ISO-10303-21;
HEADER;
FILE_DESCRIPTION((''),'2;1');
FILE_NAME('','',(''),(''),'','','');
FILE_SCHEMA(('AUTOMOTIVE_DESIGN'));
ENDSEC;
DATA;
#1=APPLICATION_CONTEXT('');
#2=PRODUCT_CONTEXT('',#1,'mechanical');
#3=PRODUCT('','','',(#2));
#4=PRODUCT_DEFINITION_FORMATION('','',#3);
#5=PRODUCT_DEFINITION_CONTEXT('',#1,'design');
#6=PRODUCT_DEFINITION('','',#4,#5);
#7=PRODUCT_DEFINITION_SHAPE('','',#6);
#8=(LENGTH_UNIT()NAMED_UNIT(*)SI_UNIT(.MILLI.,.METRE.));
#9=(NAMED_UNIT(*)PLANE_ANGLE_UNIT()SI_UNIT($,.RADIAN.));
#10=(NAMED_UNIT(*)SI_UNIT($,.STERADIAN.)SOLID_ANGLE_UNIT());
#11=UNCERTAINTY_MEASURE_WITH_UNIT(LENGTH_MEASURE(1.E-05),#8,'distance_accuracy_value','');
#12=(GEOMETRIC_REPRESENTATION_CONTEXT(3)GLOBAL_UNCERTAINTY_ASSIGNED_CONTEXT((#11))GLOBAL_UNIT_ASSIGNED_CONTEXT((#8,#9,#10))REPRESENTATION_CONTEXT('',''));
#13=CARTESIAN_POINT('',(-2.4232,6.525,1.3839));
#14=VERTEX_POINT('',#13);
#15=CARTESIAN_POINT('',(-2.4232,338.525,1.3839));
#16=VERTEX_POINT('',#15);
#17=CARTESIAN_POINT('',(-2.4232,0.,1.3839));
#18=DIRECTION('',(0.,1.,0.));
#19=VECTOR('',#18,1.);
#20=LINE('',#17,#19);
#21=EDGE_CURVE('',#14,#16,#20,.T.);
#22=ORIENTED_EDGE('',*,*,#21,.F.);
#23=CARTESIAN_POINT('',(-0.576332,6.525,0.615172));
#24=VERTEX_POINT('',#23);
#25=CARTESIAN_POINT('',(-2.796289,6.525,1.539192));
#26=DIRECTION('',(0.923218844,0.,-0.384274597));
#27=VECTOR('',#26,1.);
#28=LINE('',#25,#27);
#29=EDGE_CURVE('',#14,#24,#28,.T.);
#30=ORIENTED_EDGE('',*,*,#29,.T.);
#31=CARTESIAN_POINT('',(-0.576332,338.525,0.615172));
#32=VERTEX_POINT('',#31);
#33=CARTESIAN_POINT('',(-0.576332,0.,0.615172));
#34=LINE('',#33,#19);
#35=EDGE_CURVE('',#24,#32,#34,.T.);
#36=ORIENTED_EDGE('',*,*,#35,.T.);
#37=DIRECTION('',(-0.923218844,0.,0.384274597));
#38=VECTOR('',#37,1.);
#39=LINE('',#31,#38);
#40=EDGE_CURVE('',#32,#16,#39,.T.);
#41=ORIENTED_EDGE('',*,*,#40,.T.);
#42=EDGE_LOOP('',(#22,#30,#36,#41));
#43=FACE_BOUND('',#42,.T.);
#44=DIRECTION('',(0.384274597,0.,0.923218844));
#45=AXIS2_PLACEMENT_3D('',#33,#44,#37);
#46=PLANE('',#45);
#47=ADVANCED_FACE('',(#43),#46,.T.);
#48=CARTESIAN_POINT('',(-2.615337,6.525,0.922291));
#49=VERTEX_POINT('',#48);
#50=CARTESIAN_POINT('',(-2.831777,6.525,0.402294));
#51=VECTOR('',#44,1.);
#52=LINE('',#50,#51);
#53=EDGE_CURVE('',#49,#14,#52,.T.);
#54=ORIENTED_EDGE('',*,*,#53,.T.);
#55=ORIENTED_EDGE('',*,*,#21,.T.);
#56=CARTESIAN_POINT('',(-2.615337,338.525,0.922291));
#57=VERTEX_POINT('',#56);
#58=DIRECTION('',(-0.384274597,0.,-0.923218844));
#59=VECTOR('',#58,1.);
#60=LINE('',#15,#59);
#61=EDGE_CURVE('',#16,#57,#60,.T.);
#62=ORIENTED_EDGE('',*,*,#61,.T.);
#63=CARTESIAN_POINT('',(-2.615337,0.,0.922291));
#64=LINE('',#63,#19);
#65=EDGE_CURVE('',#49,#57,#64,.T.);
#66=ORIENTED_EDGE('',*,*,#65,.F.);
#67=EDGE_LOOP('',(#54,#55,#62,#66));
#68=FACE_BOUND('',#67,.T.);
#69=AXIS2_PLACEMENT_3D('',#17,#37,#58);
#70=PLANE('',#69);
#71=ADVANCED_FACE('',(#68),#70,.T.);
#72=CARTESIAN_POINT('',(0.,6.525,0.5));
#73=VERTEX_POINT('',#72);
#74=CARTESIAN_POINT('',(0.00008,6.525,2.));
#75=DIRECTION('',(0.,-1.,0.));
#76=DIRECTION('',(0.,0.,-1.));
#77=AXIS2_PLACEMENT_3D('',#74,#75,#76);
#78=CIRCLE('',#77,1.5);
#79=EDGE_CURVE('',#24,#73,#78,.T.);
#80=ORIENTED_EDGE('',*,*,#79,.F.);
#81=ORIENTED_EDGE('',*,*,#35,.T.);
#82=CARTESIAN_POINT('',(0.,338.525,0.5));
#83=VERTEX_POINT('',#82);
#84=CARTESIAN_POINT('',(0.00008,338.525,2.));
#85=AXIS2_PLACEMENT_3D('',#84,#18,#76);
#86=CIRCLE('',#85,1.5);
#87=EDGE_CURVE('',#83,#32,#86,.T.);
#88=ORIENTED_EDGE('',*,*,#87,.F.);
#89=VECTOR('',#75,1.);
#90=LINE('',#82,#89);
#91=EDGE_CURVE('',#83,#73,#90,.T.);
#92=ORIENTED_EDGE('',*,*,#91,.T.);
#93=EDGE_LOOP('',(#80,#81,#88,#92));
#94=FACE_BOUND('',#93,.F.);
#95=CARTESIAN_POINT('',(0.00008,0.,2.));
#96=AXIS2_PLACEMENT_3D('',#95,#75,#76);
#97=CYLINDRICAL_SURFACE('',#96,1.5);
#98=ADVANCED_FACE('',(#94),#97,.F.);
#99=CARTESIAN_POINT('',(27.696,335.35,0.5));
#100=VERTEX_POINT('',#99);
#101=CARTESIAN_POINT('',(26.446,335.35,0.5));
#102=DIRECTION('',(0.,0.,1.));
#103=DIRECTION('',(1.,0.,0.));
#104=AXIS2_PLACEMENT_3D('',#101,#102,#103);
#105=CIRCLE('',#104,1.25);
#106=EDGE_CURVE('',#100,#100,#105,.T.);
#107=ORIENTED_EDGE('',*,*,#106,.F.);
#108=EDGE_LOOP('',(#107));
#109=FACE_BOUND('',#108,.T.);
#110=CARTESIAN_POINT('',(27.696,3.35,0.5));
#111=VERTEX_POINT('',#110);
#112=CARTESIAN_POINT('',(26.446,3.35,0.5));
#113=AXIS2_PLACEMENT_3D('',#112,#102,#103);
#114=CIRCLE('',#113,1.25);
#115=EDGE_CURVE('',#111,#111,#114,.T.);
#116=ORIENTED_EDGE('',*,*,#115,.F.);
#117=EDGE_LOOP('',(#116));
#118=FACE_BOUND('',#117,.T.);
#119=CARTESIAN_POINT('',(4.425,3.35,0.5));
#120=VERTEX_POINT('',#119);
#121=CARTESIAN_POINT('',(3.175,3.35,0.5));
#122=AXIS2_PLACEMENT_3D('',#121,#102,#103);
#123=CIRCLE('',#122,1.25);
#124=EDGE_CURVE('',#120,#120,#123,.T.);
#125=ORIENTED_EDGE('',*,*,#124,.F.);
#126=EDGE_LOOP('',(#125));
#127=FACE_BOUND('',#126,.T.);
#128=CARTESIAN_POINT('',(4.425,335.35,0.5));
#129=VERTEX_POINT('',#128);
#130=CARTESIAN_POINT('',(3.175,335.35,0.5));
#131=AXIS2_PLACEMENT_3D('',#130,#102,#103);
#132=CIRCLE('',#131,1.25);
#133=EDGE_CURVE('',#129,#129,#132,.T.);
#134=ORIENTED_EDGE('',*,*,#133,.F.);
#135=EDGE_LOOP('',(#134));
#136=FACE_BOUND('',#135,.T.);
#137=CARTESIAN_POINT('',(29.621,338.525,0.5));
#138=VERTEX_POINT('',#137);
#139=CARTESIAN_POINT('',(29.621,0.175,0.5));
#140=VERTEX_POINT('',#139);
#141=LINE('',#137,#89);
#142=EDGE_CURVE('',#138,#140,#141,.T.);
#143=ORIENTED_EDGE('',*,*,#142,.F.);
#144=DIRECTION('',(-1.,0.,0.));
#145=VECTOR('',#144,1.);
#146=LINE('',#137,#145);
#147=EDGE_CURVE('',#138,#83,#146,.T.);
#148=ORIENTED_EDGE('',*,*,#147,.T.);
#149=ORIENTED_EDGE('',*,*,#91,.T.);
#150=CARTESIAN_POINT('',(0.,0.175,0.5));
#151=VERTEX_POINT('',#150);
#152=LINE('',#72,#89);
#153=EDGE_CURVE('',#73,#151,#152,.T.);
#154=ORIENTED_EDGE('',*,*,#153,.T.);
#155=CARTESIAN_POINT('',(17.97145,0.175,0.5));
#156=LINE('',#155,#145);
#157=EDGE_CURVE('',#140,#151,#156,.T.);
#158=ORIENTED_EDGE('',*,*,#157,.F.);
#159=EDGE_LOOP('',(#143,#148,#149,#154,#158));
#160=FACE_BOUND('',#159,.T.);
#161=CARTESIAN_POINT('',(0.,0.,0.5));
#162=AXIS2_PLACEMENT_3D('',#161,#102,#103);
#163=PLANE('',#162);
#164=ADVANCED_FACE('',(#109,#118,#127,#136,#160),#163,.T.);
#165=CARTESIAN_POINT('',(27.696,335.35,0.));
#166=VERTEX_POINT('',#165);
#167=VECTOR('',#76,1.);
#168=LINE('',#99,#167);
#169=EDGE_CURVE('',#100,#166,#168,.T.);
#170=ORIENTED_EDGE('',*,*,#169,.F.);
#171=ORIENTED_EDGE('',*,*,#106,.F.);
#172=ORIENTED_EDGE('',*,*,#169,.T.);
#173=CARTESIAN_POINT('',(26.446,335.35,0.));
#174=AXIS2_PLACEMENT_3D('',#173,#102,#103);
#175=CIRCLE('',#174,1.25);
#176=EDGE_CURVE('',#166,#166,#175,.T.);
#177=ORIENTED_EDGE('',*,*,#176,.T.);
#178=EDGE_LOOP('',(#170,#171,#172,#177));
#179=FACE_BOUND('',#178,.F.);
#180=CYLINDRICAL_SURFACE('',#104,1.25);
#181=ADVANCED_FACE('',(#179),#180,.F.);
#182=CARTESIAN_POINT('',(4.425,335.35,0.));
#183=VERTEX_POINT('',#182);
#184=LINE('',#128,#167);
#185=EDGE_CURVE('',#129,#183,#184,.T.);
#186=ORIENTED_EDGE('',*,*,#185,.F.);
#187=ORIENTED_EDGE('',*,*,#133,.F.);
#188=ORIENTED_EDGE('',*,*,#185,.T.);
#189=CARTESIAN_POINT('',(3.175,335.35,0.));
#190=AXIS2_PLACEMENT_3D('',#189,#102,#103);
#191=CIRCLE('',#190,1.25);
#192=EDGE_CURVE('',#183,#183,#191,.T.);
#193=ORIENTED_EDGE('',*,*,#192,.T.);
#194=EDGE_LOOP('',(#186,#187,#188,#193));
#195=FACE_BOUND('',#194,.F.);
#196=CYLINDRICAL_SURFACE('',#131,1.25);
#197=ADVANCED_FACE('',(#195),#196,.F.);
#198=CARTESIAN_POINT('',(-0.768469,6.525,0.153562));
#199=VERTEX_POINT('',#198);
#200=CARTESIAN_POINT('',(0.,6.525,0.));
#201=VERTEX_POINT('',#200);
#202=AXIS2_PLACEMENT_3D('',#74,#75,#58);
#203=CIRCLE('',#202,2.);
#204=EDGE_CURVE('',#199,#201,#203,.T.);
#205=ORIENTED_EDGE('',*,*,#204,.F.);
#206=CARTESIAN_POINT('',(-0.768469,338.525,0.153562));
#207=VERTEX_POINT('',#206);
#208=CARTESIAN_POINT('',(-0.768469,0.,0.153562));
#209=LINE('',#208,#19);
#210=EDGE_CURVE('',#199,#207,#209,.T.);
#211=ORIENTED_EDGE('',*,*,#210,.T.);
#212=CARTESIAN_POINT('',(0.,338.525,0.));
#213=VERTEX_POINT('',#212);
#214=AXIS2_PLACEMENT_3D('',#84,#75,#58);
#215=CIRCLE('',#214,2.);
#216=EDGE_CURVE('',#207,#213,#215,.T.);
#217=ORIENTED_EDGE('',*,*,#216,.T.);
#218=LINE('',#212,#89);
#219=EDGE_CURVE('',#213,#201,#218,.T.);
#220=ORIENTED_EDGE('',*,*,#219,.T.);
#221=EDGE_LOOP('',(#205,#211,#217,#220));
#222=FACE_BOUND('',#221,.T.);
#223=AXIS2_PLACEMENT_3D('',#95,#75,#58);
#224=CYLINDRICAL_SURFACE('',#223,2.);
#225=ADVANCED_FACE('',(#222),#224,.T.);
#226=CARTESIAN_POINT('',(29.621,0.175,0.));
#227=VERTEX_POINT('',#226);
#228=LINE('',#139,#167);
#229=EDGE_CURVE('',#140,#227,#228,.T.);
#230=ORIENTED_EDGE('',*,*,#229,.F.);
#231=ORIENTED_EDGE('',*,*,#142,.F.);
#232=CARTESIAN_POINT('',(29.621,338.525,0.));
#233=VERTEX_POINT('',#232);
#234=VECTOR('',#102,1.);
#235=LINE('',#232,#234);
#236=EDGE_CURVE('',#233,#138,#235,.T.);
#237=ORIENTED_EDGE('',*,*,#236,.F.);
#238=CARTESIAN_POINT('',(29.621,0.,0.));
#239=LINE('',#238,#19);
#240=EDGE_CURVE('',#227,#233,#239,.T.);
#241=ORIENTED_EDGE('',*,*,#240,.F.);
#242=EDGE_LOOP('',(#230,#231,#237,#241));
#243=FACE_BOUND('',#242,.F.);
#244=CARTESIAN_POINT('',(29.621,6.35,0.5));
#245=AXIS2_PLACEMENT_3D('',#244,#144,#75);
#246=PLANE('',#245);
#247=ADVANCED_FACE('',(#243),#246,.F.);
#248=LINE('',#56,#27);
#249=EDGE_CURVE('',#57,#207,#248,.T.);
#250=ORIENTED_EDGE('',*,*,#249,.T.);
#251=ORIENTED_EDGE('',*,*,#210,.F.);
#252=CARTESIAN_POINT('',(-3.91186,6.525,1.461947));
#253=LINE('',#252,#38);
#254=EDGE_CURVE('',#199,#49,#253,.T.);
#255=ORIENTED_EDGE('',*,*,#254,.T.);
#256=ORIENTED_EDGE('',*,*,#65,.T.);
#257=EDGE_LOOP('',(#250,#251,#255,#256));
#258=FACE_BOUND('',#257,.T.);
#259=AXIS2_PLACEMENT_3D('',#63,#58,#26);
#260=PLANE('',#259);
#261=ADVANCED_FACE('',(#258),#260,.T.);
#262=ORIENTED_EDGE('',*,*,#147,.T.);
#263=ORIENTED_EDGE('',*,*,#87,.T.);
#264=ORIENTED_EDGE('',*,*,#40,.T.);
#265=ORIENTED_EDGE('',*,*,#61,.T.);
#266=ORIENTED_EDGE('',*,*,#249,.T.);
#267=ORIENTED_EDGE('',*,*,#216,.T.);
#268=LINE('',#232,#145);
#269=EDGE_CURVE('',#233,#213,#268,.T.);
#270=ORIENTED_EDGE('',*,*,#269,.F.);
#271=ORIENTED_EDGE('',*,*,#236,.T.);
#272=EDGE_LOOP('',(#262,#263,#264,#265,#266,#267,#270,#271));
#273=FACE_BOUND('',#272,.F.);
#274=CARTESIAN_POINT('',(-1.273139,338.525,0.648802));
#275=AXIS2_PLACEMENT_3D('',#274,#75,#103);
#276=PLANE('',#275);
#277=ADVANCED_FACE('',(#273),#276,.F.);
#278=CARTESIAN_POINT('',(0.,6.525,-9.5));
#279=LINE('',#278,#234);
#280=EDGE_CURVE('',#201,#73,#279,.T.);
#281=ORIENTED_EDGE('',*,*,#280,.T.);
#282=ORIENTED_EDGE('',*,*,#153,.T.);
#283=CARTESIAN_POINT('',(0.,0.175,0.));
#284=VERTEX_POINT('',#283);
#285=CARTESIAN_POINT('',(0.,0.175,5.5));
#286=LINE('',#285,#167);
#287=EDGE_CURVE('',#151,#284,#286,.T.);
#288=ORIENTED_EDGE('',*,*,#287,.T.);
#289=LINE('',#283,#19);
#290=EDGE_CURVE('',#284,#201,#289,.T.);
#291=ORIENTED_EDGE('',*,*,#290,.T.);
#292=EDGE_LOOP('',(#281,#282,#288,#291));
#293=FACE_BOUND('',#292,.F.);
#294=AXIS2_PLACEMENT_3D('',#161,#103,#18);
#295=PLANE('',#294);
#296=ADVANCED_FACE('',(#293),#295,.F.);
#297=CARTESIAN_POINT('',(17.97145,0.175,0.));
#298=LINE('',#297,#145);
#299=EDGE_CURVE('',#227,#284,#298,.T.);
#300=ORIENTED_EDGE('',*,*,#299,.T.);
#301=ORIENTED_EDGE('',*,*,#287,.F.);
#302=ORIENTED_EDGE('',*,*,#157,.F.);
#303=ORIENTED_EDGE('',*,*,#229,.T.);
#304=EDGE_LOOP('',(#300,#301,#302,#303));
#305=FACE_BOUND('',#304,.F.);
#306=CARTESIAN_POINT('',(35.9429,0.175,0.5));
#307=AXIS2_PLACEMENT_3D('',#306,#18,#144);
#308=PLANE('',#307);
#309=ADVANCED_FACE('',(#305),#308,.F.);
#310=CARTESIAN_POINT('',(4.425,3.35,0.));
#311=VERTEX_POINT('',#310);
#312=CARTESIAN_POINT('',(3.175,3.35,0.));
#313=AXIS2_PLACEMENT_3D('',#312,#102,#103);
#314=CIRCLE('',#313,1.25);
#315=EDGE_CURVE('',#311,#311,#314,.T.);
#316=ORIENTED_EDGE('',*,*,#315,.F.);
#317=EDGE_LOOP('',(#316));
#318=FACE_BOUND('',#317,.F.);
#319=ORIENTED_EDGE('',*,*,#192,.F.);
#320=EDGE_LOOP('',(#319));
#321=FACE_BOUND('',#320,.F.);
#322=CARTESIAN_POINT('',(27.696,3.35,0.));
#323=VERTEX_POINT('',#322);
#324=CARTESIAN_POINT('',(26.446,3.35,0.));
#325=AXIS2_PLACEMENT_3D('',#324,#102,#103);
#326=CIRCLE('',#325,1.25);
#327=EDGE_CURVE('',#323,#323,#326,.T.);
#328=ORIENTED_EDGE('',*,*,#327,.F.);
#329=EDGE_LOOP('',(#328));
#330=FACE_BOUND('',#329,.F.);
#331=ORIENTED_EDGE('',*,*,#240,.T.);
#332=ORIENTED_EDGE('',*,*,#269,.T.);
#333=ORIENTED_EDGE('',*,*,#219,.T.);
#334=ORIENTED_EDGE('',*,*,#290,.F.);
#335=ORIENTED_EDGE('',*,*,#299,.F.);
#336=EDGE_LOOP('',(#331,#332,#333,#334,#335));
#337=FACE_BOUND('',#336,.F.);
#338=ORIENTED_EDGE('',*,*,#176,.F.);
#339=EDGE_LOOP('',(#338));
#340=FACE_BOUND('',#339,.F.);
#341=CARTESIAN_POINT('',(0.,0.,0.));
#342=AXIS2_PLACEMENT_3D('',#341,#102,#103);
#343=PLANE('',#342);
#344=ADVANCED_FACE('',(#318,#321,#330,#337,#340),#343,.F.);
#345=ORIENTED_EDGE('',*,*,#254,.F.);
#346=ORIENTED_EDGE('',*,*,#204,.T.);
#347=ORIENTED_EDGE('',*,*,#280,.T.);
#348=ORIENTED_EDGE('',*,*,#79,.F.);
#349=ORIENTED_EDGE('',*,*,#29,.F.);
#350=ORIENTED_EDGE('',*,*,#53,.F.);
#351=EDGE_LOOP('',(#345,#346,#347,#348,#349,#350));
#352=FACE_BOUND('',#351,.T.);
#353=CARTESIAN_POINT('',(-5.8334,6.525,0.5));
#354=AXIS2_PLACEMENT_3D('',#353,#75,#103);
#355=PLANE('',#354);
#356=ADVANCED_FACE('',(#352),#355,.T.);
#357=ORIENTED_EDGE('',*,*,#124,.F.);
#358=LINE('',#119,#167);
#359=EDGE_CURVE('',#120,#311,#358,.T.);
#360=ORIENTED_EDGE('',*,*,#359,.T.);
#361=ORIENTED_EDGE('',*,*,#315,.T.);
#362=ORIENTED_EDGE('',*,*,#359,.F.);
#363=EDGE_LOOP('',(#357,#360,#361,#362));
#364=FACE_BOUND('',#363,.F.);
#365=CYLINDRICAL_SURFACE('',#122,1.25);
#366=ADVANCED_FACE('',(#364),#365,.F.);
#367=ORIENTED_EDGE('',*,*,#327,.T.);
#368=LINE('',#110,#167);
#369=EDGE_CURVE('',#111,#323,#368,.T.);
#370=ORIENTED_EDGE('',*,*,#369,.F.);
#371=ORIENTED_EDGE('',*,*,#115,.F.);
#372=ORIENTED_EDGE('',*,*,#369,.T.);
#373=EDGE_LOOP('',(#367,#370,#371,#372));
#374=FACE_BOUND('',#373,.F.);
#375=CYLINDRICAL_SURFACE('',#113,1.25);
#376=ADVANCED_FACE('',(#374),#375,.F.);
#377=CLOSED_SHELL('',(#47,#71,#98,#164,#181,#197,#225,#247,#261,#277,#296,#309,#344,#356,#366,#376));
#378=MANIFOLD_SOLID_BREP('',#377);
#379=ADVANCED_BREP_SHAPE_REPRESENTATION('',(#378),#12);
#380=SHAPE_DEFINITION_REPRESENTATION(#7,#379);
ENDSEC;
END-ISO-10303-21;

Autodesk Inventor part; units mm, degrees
ref_plane "YZ Plane" through (0, 0, 0) normal (1, 0, 0) x (0, 1, 0)
ref_plane "XZ Plane" through (0, 0, 0) normal (0, 1, 0) x (-1, 0, 0)
ref_plane "XY Plane" through (0, 0, 0) normal (0, 0, 1) x (1, 0, 0)
sketch "Sketch1" plane through (0, 0, 0) normal (0, 0, 1) x (1, 0, 0)
  line L0 (0, 0) -> (29.621, 0)
  line L1 (29.621, 0) -> (29.621, 338.525)
  line L2 (29.621, 338.525) -> (0, 338.525)
  line L3 (0, 338.525) -> (0, 0)
  dimension "d0" = 29.621
  dimension "d1" = 338.525
extrude "Plate1" add sketch "Sketch1" along normal blind 0.5
sketch "Sketch2" plane through (-0.5764, 0, 0.6152) normal (-0.3842953, 0, -0.9232102) x (0, -1, 0)
  line L0 (-338.525, 0) -> (0, 0)
  line L1 (0, 0) -> (0, 2.0004)
  line L2 (0, 2.0004) -> (-338.525, 2.0004)
  line L3 (-338.525, 2.0004) -> (-338.525, 0)
edge flange "Flange1" height 2.4 angle 22.6 thickness 0.5 bend radius 1.5 thickness toward (-0.3842953, 0, -0.9232102) relief tear relief width 0.5 relief depth 0.25 edges at (0, 169.2625, 0.5) wall of the first edge with corners at (-0.5764, 338.525, 0.6152) (-0.5764, 0, 0.6152) (-2.4232, 0, 1.3839) (-2.4232, 338.525, 1.3839)
bend "Bend1"
corner "Corner1"
sketch "Sketch3" plane through (29.621, 0, 0) normal (1, 0, 0) x (0, 0, -1)
  line L0 (0, 0) -> (-3.9531, 0)
  line L1 (-3.9531, 0) -> (-3.9531, 6.35)
  line L2 (-3.9531, 6.35) -> (0, 6.35)
  line L3 (0, 6.35) -> (0, 0)
  dimension "d13" = 6.35
extrude "Extrusion1" cut sketch "Sketch3" against normal through all
sketch "Sketch4" plane through (0, 0, 0.5) normal (0, 0, 1) x (1, 0, 0)
  line L0 (0, 6.35) -> (29.621, 6.35)
  line L1 (29.621, 6.35) -> (29.621, 0)
  line L2 (29.621, 0) -> (0, 0)
  line L3 (0, 0) -> (0, 6.35)
extrude "Extrusion2" add sketch "Sketch4" against normal up to surface (0.5 mm away)
sketch "Sketch5" plane through (0, 0, 0.5) normal (0, 0, 1) x (1, 0, 0)
  line L0 (29.621, 0) -> (29.621, 338.525) projected
  line L1 (0, 6.35) -> (0, 338.525) projected
  line L2 (0, 0) -> (29.621, 0) projected
  line L3 (0, 0) -> (3.175, 0) construction
  line L4 (3.175, 0) -> (3.175, 3.175) construction
  line L5 (29.621, 0) -> (26.446, 0) construction
  line L6 (26.446, 0) -> (26.446, 3.175) construction
  line L7 (0, 338.525) -> (0, 335.35) construction
  line L8 (0, 335.35) -> (3.175, 335.35) construction
  line L9 (29.621, 338.525) -> (29.621, 335.35) construction
  line L10 (29.621, 335.35) -> (26.446, 335.35) construction
  circle A0 centre (3.175, 335.35) radius 1.25
  circle A1 centre (26.446, 335.35) radius 1.25
  line L11 (3.175, 3.175) -> (3.175, 3.35) construction
  line L12 (26.446, 3.175) -> (26.446, 3.35) construction
  circle A2 centre (26.446, 3.35) radius 1.25
  circle A3 centre (3.175, 3.35) radius 1.25
  dimension "d18" = 3.175
  dimension "d19" = 3.175
  dimension "d20" = 3.175
  dimension "d21" = 3.175
  dimension "d24" = 3.175
  dimension "d25" = 3.175
  dimension "d26" = 3.175
  dimension "d27" = 3.175
  dimension "d28" = 2.5
  dimension "d29" = 2.5
  dimension "d38" = 0.175
  dimension "d39" = 0.175
  dimension "d40" = 2.5
  dimension "d41" = 2.5
extrude "Extrusion3" cut sketch "Sketch5" against normal blind 10
sketch "Sketch6" plane through (0, 0, 0.5) normal (0, 0, 1) x (1, 0, 0)
  line L0 (0, 0) -> (35.9429, 0)
  line L1 (35.9429, 0) -> (35.9429, 0.175)
  line L2 (35.9429, 0.175) -> (0, 0.175)
  line L3 (0, 0.175) -> (0, 0)
  line L4 (0, 6.35) -> (-5.8334, 6.35)
  line L5 (-5.8334, 6.35) -> (-5.8334, 6.525)
  line L6 (-5.8334, 6.525) -> (0, 6.525)
  line L7 (0, 6.525) -> (0, 6.35)
  dimension "d32" = 0.175
  dimension "d33" = 0.175
extrude "Extrusion4" cut sketch "Sketch6" against normal blind 10 and the other way blind 5
equation "\"d2\" = Thickness"
equation "\"d3\" = BendReliefWidth"
equation "\"d4\" = BendReliefDepth"
equation "\"d5\" = MinimumRemnant"
equation "\"d6\" = TransitionRadius"
equation "\"d10\" = CornerReliefSize"
equation "\"d11\" = GapSize"
equation "\"d12\" = JacobiRadiusSize"
equation "\"BendRadius\" = Thickness"
equation "\"BendReliefWidth\" = Thickness"
equation "\"BendReliefDepth\" = 0.5 * Thickness"
equation "\"CornerReliefSize\" = 4 * Thickness"
equation "\"MinimumRemnant\" = 2 * Thickness"
equation "\"TransitionRadius\" = BendRadius"
equation "\"JacobiRadiusSize\" = BendRadius"
equation "\"GapSize\" = Thickness"
equation "\"Thickness\" = 0.5"
properties part number "sideplate part 2"
